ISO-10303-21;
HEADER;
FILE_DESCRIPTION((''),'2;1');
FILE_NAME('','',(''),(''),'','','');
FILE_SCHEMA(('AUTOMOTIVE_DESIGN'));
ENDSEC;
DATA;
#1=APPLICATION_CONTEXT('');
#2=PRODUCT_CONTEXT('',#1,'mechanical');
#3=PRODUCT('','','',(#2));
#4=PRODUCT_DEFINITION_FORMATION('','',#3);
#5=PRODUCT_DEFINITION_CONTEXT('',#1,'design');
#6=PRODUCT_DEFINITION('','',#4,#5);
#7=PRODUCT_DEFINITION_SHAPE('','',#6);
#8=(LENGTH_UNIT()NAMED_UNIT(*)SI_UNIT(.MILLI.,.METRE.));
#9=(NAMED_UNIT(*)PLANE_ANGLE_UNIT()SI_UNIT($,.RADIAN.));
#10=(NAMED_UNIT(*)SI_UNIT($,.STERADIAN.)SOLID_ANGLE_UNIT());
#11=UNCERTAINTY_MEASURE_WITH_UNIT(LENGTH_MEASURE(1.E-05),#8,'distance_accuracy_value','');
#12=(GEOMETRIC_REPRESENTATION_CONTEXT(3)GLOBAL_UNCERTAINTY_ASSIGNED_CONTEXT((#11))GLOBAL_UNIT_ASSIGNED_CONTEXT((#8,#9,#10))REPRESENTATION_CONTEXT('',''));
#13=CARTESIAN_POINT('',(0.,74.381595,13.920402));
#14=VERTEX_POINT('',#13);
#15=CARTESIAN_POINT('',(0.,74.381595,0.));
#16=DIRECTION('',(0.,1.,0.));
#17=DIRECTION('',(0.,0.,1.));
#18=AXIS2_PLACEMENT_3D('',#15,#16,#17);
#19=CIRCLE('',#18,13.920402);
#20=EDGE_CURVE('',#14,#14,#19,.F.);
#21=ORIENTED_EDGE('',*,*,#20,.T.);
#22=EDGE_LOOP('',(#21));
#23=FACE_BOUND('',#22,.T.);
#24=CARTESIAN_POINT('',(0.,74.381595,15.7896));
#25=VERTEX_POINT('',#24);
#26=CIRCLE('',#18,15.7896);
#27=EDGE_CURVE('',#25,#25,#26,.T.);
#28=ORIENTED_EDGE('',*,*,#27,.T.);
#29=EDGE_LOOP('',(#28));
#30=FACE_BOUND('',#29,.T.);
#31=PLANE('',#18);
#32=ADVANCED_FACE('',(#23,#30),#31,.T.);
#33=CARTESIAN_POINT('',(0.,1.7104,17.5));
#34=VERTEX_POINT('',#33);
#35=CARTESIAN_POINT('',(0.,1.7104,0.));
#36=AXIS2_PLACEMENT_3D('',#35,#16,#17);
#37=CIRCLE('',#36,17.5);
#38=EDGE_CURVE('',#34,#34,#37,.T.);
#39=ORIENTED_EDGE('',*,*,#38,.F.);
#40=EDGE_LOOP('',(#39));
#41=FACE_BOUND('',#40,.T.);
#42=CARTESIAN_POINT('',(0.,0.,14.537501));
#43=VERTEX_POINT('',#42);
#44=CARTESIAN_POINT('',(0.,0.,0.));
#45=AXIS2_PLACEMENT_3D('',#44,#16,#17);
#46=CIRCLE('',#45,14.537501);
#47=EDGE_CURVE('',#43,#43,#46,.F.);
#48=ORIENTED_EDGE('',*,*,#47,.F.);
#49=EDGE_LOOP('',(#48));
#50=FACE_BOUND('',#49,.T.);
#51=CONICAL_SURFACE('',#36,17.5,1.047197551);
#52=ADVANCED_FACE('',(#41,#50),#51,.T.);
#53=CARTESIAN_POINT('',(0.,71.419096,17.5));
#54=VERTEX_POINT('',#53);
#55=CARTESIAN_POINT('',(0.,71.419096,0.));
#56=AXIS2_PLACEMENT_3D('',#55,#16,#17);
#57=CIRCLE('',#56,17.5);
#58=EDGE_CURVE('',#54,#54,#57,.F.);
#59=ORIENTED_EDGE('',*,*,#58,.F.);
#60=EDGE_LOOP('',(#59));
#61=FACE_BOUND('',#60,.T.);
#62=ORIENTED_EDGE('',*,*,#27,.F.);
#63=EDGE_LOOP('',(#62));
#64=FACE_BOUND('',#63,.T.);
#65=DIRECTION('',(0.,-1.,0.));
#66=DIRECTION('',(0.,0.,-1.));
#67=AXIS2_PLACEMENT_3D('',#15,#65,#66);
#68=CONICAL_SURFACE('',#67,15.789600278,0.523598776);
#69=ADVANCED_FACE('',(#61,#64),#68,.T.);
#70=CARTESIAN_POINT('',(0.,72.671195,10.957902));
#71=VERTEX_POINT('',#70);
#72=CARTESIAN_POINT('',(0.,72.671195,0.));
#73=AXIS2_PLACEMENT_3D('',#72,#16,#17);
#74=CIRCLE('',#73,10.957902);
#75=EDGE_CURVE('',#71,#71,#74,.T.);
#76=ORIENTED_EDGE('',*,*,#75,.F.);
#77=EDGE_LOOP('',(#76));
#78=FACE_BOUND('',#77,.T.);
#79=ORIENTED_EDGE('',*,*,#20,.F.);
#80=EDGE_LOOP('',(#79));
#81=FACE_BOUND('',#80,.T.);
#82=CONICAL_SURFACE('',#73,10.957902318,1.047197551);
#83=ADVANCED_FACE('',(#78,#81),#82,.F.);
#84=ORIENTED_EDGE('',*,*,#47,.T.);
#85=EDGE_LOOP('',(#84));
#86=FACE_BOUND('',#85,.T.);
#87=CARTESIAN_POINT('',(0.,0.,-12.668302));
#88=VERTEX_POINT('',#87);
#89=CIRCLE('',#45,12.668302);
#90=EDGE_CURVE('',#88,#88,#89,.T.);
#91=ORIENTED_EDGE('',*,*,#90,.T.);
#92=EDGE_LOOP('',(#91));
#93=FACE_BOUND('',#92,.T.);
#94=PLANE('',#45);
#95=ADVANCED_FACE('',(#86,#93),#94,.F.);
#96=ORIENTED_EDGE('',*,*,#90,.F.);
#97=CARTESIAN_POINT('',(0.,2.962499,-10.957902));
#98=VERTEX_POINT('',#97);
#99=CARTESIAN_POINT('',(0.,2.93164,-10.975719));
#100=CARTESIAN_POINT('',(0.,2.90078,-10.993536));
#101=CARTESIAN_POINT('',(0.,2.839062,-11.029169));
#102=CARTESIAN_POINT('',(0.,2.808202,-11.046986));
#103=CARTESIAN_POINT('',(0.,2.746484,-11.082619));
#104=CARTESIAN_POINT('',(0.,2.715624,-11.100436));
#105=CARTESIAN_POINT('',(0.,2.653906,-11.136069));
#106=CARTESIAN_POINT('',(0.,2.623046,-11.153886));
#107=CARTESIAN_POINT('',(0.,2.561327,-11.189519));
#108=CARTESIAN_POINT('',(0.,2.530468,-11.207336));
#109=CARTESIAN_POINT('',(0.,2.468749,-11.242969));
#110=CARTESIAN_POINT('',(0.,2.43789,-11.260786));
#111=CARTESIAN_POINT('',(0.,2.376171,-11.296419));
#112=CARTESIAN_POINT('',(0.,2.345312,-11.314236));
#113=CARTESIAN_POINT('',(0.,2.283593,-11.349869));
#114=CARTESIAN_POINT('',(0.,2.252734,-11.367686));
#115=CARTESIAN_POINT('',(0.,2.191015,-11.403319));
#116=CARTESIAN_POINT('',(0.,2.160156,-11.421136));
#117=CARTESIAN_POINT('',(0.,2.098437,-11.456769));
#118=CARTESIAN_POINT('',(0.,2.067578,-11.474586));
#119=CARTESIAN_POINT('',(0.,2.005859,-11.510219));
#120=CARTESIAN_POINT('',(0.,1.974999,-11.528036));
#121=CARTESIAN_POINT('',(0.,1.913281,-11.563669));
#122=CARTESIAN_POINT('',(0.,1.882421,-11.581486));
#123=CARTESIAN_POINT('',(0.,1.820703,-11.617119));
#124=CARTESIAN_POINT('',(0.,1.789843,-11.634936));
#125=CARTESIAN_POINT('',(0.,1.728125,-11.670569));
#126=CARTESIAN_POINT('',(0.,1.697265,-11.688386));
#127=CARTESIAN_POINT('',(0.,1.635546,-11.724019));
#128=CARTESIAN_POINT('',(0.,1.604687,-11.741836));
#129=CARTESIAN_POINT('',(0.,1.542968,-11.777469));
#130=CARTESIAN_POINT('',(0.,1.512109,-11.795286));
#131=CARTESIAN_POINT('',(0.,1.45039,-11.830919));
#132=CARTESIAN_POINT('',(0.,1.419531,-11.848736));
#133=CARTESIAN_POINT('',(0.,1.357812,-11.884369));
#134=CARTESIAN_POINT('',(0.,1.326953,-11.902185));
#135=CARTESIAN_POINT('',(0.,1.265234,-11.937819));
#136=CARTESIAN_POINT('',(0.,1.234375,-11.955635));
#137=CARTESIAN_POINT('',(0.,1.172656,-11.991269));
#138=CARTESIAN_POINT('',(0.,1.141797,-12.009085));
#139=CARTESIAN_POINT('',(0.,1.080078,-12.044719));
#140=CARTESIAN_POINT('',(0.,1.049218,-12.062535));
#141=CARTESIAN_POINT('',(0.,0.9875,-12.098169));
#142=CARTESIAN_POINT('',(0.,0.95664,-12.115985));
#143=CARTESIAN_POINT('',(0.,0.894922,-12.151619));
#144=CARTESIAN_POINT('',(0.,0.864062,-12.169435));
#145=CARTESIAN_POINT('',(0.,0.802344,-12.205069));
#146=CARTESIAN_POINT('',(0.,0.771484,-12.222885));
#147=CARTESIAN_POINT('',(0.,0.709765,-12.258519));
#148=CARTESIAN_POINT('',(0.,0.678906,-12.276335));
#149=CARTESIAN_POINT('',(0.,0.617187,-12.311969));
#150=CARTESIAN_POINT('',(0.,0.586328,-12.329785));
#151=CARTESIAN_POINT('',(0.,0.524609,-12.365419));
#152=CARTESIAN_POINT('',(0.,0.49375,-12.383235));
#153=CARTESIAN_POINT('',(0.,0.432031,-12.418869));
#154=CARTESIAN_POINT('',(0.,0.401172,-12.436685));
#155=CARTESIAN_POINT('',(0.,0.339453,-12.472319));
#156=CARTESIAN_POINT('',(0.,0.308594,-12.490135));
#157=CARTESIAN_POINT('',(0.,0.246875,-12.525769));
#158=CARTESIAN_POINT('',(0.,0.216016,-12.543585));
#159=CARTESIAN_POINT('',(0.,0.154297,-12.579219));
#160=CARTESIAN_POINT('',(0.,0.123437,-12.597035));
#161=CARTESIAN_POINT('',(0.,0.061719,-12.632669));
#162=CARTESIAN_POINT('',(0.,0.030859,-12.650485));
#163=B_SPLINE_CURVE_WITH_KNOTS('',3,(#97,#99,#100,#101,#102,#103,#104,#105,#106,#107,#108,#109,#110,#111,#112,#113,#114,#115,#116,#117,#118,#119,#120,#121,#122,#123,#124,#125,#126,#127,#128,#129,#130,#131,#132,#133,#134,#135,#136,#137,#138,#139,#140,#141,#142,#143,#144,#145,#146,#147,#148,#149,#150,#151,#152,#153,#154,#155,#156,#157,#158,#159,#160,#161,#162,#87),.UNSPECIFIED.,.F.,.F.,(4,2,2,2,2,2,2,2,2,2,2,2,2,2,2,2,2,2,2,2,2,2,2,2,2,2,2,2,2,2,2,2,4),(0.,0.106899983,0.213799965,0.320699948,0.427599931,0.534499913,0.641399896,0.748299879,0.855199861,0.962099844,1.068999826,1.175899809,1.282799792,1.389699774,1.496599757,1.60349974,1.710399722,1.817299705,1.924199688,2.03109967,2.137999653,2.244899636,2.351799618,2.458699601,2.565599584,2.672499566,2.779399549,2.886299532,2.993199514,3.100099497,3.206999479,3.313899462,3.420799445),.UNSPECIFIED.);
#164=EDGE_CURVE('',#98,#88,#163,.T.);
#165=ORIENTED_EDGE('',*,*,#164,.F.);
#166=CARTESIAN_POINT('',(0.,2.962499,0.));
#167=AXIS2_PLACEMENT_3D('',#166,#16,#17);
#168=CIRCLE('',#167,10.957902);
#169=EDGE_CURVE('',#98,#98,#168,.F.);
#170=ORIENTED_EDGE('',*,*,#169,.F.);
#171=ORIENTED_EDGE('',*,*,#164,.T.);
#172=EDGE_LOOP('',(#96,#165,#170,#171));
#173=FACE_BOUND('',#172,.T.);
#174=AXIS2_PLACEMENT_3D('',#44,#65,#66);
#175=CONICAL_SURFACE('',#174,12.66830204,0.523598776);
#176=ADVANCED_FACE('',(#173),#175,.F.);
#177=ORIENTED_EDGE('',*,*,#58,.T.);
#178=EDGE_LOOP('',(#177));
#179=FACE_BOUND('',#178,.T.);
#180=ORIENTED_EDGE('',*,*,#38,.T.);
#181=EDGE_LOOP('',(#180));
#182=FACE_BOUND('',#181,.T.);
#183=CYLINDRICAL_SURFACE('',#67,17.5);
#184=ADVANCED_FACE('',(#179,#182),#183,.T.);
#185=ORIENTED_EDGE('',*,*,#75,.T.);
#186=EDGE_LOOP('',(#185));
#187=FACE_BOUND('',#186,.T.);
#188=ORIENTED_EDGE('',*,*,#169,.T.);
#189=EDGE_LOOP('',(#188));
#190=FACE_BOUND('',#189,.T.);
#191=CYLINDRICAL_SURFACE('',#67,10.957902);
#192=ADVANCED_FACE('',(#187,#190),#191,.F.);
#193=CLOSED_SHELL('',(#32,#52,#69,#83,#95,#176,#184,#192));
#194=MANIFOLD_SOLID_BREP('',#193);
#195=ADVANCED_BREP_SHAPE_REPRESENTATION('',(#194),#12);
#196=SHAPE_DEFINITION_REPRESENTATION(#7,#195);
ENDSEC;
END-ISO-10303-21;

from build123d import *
from OCP.BRepFilletAPI import BRepFilletAPI_MakeChamfer

# Parameters (mm, degrees)
SKETCH1_R           = 17.5
BOSS_EXTRUDE1_DEPTH = 74.38159497
SKETCH2_R           = 10.957902318
CUT_EXTRUDE1_DEPTH  = 79.390826443
CHAMFER1_SIZE       = 2.96249922
CHAMFER1_SIZE2      = 1.710399722


with BuildPart() as part:
    # Sketch1 → Boss-Extrude1 (new body)
    with BuildSketch(Plane(origin=(0, 0, 0), x_dir=(1, 0, 0), z_dir=(0, 1, 0))):
        Circle(SKETCH1_R)
    extrude(amount=BOSS_EXTRUDE1_DEPTH)

    # Sketch2 → Cut-Extrude1 (cut, through all)
    with BuildSketch(Plane(origin=(0, 0, 0), x_dir=(1, 0, 0), z_dir=(0, 1, 0))):
        Circle(SKETCH2_R)
    extrude(amount=CUT_EXTRUDE1_DEPTH, mode=Mode.SUBTRACT)

    # Chamfer1: one chamfer whose edges measure the first distance from different faces: ONE call of the kernel's chamfer builder (chamfer() names one face for all edges)
    chamfer1_edges_1 = [part.edges().sort_by_distance(p)[0] for p in [
        (-10.957902318, 74.38159497, 0),
    ]]
    chamfer1_side_1 = [part.faces().sort_by_distance(p)[0] for p in [
        (-17.005025253, 74.38159497, 0),
    ]]
    chamfer1_edges_2 = [part.edges().sort_by_distance(p)[0] for p in [
        (-10.957902318, 0, 0),
    ]]
    chamfer1_side_2 = [part.faces().sort_by_distance(p)[0] for p in [
        (-10.957902318, 37.190797485, 0),
    ]]
    chamfer1_edges_3 = [part.edges().sort_by_distance(p)[0] for p in [
        (-17.5, 0, 0),
    ]]
    chamfer1_side_3 = [part.faces().sort_by_distance(p)[0] for p in [
        (-17.005025253, 0, 0),
    ]]
    chamfer1_edges_4 = [part.edges().sort_by_distance(p)[0] for p in [
        (-17.5, 74.38159497, 0),
    ]]
    chamfer1_side_4 = [part.faces().sort_by_distance(p)[0] for p in [
        (-17.5, 37.190797485, 0),
    ]]
    chamfer1 = BRepFilletAPI_MakeChamfer(part.part.solid().wrapped)
    for e in chamfer1_edges_1:
        chamfer1.Add(CHAMFER1_SIZE, CHAMFER1_SIZE2, e.wrapped, chamfer1_side_1[0].wrapped)  # the first distance lies on this face
    for e in chamfer1_edges_2:
        chamfer1.Add(CHAMFER1_SIZE, CHAMFER1_SIZE2, e.wrapped, chamfer1_side_2[0].wrapped)  # the first distance lies on this face
    for e in chamfer1_edges_3:
        chamfer1.Add(CHAMFER1_SIZE, CHAMFER1_SIZE2, e.wrapped, chamfer1_side_3[0].wrapped)  # the first distance lies on this face
    for e in chamfer1_edges_4:
        chamfer1.Add(CHAMFER1_SIZE, CHAMFER1_SIZE2, e.wrapped, chamfer1_side_4[0].wrapped)  # the first distance lies on this face
    add(Compound.cast(chamfer1.Shape()), mode=Mode.REPLACE)


solid = part.part
